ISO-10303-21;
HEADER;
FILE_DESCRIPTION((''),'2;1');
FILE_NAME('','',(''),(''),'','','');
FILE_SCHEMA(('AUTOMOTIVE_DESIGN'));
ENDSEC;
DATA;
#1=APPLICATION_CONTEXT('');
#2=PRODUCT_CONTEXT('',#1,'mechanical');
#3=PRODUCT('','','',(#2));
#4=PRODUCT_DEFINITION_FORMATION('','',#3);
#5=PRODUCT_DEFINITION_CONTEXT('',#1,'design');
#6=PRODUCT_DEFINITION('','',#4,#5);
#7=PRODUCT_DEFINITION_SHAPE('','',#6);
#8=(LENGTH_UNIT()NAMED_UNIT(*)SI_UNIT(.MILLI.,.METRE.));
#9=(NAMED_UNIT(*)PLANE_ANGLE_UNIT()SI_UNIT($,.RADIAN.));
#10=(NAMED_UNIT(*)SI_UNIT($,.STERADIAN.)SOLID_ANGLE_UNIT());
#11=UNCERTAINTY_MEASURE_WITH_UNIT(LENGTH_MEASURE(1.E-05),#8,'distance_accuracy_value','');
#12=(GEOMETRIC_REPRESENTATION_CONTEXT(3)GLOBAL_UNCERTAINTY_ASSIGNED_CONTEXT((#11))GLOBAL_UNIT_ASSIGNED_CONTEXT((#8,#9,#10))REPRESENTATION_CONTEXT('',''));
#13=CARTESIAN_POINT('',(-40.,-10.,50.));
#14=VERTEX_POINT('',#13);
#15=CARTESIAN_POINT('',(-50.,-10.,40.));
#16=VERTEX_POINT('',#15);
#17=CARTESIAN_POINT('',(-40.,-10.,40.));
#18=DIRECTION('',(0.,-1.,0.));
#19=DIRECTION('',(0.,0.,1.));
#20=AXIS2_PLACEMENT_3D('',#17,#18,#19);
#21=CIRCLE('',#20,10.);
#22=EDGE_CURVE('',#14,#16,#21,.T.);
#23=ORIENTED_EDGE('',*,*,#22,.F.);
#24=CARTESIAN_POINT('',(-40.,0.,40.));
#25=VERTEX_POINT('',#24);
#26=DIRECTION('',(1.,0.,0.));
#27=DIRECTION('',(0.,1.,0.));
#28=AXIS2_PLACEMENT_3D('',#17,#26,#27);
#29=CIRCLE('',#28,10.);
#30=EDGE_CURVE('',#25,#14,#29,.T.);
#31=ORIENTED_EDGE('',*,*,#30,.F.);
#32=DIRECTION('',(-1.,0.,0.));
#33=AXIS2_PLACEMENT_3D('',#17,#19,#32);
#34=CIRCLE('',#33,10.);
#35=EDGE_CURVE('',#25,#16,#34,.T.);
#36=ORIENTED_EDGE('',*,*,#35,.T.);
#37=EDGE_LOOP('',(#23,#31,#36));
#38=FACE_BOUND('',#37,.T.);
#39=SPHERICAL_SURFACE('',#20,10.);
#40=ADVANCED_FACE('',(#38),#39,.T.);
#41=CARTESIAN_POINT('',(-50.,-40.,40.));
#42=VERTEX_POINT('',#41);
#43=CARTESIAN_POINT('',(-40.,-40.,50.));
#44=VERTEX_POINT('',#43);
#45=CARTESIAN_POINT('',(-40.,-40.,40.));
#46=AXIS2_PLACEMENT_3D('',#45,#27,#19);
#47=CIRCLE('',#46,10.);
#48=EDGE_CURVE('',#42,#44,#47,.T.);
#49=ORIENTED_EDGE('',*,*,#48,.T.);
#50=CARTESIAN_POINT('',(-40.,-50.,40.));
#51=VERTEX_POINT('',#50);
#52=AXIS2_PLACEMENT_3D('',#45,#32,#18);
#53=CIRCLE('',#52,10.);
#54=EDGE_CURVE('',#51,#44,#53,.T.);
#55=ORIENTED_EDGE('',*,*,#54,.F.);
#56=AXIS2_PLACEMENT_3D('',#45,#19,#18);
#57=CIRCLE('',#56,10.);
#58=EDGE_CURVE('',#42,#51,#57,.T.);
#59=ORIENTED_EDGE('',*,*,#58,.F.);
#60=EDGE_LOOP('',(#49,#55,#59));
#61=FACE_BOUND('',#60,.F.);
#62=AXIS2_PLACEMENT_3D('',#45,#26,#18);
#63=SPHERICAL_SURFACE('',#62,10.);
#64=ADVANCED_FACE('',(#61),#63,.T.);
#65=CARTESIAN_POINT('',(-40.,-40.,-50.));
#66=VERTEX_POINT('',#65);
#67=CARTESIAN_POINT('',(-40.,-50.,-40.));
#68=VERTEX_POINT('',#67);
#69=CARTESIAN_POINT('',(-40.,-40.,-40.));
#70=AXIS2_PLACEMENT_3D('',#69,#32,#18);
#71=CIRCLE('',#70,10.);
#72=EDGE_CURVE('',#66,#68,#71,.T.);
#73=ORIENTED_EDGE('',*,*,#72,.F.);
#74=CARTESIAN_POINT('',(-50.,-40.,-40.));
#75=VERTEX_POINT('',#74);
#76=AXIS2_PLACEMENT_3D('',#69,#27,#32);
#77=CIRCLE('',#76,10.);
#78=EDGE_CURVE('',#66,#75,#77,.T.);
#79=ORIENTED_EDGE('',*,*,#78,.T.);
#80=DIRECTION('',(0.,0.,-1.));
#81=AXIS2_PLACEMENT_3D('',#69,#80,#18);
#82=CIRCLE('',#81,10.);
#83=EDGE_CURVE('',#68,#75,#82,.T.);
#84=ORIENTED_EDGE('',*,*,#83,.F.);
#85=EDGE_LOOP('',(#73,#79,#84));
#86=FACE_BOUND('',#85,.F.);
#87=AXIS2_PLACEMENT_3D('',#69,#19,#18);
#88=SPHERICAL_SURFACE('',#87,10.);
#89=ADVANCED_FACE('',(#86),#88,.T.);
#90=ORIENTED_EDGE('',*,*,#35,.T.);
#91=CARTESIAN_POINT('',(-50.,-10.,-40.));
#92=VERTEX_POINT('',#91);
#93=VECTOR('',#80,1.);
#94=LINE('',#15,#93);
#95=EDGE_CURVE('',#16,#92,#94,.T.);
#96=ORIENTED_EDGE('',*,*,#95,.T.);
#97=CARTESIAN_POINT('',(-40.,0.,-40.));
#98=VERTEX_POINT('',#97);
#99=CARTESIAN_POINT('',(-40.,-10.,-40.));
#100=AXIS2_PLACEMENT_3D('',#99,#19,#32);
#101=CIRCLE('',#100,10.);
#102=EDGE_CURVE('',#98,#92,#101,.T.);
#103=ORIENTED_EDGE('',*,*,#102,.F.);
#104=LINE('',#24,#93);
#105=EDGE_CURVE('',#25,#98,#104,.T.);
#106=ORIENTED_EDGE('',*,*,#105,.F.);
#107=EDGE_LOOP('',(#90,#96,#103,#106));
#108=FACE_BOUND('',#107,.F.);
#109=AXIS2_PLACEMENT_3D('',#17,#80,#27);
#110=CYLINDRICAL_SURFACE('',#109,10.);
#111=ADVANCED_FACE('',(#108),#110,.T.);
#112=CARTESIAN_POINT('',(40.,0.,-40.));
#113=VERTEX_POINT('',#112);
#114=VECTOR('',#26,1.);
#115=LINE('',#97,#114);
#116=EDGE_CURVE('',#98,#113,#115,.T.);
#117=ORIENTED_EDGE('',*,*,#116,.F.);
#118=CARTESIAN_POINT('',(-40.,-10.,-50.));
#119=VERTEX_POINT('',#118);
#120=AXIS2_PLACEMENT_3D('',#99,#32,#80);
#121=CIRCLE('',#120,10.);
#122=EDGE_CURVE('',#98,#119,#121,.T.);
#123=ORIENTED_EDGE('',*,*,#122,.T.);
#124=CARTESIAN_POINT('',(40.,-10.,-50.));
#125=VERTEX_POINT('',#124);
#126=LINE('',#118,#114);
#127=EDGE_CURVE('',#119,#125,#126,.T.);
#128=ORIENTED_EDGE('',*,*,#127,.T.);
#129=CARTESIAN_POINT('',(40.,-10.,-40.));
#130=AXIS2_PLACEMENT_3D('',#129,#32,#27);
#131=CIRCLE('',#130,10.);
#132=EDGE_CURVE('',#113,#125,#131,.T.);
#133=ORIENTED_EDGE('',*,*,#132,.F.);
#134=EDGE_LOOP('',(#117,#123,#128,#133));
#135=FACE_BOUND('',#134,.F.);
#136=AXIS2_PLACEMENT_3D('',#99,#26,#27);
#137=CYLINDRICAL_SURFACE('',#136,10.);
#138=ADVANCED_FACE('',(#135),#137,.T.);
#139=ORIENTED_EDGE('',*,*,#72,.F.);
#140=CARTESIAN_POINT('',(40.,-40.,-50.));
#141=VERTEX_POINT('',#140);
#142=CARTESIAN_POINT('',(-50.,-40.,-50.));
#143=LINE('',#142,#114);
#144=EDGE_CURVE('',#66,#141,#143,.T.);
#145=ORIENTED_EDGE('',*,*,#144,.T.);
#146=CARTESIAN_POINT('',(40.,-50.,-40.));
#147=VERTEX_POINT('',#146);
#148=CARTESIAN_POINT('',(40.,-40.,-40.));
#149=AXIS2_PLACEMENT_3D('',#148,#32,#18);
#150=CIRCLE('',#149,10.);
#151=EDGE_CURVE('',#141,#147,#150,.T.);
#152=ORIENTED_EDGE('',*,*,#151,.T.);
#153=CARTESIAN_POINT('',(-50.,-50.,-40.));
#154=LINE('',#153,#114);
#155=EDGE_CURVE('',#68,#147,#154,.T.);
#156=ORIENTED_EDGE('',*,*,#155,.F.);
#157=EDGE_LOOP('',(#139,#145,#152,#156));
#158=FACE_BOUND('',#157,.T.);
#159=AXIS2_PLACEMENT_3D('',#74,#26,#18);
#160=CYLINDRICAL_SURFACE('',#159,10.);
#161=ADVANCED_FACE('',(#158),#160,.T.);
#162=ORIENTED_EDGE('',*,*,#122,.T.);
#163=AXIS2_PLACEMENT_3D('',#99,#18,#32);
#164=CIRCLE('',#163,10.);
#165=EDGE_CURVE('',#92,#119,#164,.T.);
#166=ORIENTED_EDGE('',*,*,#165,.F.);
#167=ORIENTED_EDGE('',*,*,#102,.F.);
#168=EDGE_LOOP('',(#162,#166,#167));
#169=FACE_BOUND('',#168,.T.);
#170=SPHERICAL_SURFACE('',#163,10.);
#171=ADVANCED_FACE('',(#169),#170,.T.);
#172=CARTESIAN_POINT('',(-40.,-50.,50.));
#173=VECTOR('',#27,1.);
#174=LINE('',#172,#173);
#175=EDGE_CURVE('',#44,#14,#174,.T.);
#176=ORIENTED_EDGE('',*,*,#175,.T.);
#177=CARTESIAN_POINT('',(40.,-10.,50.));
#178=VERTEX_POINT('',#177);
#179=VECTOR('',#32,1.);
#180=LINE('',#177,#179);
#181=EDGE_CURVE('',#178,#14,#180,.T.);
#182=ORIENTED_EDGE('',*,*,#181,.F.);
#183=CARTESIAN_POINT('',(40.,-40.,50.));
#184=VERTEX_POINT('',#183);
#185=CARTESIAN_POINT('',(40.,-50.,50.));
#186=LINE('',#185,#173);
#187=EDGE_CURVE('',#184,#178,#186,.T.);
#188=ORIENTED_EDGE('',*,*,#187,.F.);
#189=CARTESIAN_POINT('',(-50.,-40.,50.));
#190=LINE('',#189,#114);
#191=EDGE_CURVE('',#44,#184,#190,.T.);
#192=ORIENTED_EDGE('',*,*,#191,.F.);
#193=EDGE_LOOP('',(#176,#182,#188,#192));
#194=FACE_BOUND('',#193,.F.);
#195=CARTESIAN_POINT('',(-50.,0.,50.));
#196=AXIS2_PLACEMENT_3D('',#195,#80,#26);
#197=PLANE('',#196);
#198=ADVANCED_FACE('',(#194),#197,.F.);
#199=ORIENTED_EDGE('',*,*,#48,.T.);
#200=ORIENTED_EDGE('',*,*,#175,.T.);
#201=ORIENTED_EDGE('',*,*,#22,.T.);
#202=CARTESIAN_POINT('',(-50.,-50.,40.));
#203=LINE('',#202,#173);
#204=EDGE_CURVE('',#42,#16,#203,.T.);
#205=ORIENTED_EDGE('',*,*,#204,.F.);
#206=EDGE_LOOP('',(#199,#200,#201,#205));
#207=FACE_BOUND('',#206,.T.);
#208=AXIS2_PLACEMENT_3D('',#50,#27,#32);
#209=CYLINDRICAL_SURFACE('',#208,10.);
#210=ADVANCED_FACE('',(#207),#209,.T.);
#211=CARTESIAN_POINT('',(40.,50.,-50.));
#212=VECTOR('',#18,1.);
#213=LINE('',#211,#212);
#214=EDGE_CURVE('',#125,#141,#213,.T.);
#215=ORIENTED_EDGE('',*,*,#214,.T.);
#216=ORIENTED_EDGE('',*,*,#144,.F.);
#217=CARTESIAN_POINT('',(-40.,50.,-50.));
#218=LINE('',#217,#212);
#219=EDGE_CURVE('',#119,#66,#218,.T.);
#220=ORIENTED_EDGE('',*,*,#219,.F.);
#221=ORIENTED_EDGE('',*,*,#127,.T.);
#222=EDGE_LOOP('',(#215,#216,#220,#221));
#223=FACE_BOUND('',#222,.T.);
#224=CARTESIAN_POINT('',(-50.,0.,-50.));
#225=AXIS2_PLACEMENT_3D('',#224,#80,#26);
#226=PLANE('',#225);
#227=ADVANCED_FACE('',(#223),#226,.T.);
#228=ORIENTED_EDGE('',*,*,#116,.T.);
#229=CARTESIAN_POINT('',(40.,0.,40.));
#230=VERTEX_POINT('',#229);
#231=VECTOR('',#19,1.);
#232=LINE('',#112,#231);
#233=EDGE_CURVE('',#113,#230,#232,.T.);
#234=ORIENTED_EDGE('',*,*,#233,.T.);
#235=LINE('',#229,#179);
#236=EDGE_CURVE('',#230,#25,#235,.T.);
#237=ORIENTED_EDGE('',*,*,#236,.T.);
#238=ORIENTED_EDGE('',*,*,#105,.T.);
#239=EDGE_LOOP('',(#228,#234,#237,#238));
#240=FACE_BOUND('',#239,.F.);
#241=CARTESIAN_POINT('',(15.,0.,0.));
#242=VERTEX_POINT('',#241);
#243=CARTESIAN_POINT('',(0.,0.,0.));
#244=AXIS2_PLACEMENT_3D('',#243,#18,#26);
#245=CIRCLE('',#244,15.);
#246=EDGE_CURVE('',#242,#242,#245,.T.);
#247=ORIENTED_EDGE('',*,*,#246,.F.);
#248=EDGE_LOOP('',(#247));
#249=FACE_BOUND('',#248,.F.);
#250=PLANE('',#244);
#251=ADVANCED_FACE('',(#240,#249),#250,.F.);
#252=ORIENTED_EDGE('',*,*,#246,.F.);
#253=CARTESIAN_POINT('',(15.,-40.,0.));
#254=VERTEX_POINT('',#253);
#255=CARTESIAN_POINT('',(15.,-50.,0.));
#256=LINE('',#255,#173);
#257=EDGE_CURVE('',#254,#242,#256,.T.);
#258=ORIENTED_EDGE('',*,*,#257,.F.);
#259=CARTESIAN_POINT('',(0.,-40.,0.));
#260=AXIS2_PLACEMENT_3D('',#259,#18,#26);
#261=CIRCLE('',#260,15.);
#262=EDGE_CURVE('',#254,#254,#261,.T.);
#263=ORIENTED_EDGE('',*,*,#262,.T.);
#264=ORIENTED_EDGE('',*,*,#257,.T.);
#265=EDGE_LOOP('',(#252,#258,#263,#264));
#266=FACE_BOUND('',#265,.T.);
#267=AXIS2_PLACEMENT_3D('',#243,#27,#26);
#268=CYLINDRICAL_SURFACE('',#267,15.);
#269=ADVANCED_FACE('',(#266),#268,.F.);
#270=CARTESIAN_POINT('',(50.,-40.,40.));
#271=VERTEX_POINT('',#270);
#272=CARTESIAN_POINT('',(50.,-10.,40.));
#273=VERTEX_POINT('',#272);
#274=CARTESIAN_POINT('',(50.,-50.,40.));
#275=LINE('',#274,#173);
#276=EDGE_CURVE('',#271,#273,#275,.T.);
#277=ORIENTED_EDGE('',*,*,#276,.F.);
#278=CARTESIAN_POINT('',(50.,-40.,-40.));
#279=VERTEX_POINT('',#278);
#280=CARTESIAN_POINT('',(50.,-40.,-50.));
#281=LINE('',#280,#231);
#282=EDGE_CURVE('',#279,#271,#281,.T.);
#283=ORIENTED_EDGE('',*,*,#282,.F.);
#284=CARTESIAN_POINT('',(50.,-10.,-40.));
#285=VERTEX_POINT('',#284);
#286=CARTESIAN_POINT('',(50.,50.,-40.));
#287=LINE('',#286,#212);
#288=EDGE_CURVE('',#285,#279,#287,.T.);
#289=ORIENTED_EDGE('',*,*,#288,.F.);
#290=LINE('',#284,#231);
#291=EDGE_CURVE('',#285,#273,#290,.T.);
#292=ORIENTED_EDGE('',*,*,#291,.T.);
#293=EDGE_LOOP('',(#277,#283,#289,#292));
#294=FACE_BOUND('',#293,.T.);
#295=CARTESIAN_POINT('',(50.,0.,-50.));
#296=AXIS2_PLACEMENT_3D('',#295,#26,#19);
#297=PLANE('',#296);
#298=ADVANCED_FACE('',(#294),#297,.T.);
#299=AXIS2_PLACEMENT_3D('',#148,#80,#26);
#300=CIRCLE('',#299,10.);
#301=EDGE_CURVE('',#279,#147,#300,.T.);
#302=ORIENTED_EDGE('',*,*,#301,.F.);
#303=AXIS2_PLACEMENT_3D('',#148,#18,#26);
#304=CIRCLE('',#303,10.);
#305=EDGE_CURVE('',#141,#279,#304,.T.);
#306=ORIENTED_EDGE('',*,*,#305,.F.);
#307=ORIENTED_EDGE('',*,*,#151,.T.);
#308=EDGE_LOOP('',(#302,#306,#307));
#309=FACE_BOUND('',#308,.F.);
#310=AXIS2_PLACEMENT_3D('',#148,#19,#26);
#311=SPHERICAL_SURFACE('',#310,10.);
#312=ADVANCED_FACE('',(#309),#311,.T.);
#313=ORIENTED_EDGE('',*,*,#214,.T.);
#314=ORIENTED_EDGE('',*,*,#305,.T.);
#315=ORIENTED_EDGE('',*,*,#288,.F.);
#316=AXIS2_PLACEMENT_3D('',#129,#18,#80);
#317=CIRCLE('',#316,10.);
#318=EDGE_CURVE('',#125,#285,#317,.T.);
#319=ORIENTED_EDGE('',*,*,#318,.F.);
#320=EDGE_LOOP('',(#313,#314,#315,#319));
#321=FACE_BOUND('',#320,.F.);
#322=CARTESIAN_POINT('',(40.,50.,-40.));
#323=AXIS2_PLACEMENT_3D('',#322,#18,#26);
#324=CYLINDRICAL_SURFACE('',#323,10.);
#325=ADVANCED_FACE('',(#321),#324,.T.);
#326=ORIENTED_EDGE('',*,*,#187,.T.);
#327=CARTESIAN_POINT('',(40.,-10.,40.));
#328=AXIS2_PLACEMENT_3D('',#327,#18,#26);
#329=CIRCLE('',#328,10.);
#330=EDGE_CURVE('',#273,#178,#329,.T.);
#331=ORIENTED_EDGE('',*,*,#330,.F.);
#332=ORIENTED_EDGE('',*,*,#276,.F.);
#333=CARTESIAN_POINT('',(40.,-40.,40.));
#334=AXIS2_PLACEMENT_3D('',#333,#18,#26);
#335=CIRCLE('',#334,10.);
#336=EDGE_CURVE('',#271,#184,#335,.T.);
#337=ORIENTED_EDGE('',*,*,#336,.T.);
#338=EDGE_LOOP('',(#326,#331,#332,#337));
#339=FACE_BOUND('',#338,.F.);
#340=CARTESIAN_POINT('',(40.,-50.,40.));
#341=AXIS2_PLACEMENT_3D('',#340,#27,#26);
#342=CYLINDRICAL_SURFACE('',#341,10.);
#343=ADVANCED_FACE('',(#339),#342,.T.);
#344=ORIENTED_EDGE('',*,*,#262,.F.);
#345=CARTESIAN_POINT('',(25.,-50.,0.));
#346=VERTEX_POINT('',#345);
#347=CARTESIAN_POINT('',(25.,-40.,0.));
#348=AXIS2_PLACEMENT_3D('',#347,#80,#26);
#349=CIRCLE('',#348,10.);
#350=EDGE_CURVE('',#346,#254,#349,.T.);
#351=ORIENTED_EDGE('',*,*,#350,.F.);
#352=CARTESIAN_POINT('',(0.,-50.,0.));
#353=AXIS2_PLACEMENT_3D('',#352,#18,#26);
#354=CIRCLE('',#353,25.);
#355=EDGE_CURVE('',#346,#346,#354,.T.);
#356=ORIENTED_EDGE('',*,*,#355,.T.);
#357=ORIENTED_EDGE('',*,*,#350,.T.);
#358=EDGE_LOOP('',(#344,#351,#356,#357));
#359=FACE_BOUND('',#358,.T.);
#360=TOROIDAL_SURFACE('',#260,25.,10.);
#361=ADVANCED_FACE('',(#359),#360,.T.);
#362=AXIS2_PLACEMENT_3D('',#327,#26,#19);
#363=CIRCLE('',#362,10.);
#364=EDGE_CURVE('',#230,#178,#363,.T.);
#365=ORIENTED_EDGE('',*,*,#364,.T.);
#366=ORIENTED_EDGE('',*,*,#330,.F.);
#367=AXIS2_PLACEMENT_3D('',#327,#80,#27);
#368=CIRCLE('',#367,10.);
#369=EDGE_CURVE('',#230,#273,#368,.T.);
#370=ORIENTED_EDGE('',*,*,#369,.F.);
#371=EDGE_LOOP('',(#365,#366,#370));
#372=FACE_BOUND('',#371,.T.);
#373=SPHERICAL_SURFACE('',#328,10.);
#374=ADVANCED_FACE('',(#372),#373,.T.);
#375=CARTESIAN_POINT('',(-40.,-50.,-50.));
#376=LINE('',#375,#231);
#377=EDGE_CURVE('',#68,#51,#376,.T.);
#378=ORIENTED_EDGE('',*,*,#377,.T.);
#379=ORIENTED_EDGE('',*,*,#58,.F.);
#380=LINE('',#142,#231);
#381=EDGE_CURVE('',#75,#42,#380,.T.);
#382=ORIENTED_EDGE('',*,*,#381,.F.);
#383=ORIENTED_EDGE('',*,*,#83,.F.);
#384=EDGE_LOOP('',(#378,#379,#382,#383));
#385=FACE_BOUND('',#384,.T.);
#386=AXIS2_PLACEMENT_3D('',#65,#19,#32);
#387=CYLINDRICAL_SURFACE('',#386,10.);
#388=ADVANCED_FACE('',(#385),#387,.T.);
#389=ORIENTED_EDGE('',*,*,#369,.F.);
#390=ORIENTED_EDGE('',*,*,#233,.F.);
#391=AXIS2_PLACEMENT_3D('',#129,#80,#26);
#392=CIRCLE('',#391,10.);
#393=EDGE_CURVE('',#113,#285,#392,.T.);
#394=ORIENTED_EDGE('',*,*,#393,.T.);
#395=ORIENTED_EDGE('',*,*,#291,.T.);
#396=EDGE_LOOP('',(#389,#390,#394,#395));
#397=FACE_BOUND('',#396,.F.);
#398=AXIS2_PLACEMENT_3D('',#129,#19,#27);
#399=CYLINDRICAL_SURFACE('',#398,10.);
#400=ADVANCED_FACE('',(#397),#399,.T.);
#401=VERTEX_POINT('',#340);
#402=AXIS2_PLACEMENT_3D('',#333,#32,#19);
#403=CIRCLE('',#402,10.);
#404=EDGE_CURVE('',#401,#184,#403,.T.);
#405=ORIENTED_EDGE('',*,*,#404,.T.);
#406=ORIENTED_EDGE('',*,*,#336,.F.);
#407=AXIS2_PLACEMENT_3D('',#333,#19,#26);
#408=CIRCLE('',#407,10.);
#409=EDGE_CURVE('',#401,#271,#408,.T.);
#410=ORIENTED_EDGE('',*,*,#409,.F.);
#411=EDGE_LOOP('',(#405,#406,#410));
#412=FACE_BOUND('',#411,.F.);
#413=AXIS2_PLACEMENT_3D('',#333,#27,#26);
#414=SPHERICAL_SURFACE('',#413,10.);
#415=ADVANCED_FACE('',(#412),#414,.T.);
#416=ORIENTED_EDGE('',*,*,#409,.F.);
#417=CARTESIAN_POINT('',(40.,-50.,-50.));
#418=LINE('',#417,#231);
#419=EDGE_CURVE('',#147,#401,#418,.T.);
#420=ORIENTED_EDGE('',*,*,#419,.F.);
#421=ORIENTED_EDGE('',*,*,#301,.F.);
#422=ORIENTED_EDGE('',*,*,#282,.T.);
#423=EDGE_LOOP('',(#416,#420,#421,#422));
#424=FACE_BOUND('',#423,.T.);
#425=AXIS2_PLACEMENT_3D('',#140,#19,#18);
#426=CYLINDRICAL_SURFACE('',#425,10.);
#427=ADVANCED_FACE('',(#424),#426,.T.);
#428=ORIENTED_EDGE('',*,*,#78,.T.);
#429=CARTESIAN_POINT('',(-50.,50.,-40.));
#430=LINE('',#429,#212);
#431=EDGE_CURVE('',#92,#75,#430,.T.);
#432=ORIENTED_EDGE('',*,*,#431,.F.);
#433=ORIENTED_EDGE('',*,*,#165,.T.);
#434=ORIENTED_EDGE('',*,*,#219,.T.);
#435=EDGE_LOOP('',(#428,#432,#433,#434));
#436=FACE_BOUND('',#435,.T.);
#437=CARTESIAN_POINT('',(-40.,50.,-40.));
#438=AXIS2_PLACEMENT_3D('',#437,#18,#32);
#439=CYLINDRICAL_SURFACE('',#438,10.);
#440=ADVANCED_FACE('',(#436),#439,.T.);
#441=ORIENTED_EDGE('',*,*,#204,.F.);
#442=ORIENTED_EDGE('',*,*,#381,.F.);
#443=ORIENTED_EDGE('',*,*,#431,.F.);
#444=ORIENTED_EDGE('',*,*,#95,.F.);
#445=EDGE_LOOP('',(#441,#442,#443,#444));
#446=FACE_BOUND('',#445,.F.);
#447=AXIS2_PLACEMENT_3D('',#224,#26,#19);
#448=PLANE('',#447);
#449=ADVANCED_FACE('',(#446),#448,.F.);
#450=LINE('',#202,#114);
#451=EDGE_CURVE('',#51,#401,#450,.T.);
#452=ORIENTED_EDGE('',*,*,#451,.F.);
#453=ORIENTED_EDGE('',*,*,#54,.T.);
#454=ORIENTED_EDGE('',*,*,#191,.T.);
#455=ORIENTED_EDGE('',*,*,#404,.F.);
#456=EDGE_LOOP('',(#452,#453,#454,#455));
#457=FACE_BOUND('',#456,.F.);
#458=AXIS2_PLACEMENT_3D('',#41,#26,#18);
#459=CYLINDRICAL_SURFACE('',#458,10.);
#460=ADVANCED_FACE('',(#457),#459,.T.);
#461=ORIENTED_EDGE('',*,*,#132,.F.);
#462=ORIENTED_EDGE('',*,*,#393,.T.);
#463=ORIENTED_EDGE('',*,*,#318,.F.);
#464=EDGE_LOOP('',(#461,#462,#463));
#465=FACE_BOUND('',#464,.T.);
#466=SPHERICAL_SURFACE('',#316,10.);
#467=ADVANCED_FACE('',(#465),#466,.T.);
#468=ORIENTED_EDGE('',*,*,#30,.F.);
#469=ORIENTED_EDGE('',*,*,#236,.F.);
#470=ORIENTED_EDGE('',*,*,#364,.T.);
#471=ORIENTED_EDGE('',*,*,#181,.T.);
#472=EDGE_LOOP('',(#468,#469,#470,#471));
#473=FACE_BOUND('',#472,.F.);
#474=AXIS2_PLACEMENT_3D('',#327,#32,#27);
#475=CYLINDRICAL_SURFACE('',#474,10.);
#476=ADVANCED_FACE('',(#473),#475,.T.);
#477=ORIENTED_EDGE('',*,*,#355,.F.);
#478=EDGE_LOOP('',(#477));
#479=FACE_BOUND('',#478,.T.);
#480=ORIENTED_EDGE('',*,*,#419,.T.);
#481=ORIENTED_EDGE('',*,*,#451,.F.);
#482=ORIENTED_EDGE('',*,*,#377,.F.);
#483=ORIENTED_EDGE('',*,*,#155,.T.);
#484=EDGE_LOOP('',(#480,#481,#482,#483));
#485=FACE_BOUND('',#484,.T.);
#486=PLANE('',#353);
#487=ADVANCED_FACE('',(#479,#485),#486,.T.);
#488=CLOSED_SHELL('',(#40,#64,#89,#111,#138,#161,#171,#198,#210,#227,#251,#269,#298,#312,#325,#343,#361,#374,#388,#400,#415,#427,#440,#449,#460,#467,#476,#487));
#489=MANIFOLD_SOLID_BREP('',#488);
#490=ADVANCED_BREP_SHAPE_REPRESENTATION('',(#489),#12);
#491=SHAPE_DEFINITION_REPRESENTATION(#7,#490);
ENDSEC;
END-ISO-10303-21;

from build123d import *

# Parameters (mm, degrees)
F0_W     = 100
F0_H     = 100
F0_R     = 15
F1_DEPTH = 50
F2_R     = 10
F3_DEPTH = 50
F6_R     = 10


# Not quite as in the source:
# - the program builds the solid bodies; features that only make, move or delete a surface that nothing else refers to are left out


with BuildPart() as f1:
    # F0 (on Front) → F1 (new body, symmetric)
    with BuildSketch(Plane.XZ):
        Rectangle(F0_W, F0_H)
        Circle(F0_R, mode=Mode.SUBTRACT)
    extrude(amount=F1_DEPTH, both=True)

    # F2
    f2_edges = [f1.edges().sort_by_distance(p)[0] for p in [
        (50, 50, 0),
        (50, 0, 50),
        (50, -50, 0),
        (50, 0, -50),
        (0, -50, 50),
        (-50, -50, 0),
        (0, -50, -50),
        (-15, -50, 0),
        (0, 50, 50),
        (-50, 0, 50),
        (-50, 50, 0),
        (-50, 0, -50),
    ]]
    fillet(f2_edges, radius=F2_R)

    # F0 (on Front) → F3 (cut)
    with BuildSketch(Plane.XZ):
        Rectangle(F0_W, F0_H)
        Circle(F0_R, mode=Mode.SUBTRACT)
    extrude(amount=-F3_DEPTH, mode=Mode.SUBTRACT)

    # F6
    f6_edges = [f1.edges().sort_by_distance(p)[0] for p in [
        (-47.071068, 0, -47.071068),
        (-40, -20, -50),
        (-47.071068, -40, -47.071068),
        (-50, -20, -40),
        (-47.071068, 0, 47.071068),
        (-40, -20, 50),
        (-47.071068, -40, 47.071068),
        (-50, -20, 40),
        (-47.071068, -47.071068, 40),
        (-50, -40, 0),
        (-40, -50, 0),
        (-47.071068, -47.071068, -40),
        (-50, 0, 0),
        (47.071068, -40, -47.071068),
        (50, -20, -40),
        (47.071068, 0, -47.071068),
        (40, -20, -50),
        (50, -40, 0),
        (50, -20, 40),
        (50, 0, 0),
        (40, -50, 0),
        (0, -50, -40),
        (0, -50, 40),
        (-25, -50, 0),
        (0, 0, 50),
        (47.071068, 0, 47.071068),
        (0, 0, -50),
    ]]
    fillet(f6_edges, radius=F6_R)


solid = f1.part
